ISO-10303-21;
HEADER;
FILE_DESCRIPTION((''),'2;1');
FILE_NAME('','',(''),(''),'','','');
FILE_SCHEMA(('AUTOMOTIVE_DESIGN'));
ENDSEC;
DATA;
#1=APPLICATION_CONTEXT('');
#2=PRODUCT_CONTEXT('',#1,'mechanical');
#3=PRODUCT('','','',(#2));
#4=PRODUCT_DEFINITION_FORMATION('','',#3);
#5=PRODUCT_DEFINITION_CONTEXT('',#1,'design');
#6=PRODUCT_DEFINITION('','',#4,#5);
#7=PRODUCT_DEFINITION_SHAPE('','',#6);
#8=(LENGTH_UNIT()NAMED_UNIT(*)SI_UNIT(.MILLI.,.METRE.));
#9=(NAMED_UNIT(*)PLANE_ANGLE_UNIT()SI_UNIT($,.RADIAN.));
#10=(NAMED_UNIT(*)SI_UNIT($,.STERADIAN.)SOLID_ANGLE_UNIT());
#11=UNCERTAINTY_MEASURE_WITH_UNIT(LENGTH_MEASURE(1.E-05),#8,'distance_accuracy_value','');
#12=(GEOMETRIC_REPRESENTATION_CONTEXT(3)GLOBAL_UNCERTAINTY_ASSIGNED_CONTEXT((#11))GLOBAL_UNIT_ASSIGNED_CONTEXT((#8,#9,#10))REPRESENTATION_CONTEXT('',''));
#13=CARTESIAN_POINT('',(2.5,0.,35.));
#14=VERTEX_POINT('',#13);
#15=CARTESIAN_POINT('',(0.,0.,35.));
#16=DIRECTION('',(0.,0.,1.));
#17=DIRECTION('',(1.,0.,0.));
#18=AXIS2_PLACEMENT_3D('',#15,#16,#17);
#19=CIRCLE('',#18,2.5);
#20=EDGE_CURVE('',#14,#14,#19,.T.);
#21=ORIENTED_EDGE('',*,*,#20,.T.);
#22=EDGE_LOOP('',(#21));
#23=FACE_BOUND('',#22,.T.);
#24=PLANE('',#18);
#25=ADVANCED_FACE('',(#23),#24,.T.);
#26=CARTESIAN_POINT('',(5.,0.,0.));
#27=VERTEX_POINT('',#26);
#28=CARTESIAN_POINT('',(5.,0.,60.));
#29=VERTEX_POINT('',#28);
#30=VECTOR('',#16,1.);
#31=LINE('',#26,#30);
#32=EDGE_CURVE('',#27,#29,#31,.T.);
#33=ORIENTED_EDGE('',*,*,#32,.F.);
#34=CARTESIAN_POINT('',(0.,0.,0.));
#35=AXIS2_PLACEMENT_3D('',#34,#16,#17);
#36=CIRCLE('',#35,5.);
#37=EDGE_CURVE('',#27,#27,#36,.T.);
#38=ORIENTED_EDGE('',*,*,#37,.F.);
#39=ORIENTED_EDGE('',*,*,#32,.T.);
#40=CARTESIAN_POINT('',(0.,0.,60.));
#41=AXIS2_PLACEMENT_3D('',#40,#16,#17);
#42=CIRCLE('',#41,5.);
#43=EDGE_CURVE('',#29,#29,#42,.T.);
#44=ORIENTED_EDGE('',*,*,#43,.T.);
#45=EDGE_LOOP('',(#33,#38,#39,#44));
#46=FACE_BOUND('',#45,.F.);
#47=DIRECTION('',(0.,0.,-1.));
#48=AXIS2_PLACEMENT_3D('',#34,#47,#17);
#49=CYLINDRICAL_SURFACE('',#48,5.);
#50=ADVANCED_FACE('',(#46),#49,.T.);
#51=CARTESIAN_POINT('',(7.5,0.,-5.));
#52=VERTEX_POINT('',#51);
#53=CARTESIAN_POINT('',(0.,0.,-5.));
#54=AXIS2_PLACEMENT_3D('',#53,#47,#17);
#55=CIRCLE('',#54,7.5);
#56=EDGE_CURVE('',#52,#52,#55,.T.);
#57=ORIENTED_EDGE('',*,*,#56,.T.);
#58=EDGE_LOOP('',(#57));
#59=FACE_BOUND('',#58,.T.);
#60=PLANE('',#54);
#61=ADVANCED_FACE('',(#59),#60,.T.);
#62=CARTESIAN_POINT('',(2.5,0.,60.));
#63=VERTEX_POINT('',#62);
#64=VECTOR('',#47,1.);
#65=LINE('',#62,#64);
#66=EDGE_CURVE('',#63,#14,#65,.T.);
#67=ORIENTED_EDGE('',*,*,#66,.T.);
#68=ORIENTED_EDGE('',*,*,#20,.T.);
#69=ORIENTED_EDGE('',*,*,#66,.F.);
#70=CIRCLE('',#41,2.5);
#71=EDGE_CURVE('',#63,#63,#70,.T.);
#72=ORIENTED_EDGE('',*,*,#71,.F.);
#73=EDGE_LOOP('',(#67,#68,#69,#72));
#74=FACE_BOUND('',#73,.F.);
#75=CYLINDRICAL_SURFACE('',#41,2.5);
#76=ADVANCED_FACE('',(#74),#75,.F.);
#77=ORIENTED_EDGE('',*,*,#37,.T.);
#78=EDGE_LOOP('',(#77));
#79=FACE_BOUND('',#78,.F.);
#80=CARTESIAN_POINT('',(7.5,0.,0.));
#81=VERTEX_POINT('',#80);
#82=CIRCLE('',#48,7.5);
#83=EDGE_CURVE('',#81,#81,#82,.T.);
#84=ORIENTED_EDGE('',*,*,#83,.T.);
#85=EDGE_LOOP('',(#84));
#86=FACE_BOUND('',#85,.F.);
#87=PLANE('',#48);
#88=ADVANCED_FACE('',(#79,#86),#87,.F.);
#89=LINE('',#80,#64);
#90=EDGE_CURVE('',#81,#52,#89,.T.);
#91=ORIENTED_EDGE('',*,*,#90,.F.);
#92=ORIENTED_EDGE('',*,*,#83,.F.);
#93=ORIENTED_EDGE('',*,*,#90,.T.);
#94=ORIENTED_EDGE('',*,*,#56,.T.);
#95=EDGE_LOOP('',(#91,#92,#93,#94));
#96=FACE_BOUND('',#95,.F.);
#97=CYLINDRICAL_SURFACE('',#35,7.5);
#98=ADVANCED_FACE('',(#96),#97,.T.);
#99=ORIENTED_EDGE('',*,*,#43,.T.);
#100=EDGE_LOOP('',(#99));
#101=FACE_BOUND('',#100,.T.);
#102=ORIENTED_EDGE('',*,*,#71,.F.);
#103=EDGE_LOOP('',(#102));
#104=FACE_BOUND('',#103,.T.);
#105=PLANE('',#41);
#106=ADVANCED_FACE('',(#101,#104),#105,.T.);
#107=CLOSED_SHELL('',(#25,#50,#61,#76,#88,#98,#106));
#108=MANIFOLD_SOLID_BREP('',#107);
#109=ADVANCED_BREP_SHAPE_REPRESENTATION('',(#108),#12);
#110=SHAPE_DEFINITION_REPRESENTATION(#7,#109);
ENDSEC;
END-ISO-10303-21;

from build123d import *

# Parameters (mm, degrees)
F0_R     = 5
F1_DEPTH = 60
F2_R     = 7.5
F2_R_2   = 5
F3_DEPTH = 5
F4_R     = 2.5
F5_DEPTH = 25


with BuildPart() as f1:
    # F0 (on Top) → F1 (new body)
    with BuildSketch(Plane.XY):
        Circle(F0_R)
    extrude(amount=F1_DEPTH)

    # F2 (on face) → F3 (join)
    with BuildSketch(Plane(origin=(0, 0, 0), x_dir=(1, 0, 0), z_dir=(0, 0, -1))):
        Circle(F2_R)
        Circle(F2_R_2, mode=Mode.SUBTRACT)
        Circle(F2_R_2)
    extrude(amount=F3_DEPTH)

    # F4 (on face) → F5 (cut)
    with BuildSketch(Plane.XY.offset(60)):
        Circle(F4_R)
    extrude(amount=-F5_DEPTH, mode=Mode.SUBTRACT)


solid = f1.part
